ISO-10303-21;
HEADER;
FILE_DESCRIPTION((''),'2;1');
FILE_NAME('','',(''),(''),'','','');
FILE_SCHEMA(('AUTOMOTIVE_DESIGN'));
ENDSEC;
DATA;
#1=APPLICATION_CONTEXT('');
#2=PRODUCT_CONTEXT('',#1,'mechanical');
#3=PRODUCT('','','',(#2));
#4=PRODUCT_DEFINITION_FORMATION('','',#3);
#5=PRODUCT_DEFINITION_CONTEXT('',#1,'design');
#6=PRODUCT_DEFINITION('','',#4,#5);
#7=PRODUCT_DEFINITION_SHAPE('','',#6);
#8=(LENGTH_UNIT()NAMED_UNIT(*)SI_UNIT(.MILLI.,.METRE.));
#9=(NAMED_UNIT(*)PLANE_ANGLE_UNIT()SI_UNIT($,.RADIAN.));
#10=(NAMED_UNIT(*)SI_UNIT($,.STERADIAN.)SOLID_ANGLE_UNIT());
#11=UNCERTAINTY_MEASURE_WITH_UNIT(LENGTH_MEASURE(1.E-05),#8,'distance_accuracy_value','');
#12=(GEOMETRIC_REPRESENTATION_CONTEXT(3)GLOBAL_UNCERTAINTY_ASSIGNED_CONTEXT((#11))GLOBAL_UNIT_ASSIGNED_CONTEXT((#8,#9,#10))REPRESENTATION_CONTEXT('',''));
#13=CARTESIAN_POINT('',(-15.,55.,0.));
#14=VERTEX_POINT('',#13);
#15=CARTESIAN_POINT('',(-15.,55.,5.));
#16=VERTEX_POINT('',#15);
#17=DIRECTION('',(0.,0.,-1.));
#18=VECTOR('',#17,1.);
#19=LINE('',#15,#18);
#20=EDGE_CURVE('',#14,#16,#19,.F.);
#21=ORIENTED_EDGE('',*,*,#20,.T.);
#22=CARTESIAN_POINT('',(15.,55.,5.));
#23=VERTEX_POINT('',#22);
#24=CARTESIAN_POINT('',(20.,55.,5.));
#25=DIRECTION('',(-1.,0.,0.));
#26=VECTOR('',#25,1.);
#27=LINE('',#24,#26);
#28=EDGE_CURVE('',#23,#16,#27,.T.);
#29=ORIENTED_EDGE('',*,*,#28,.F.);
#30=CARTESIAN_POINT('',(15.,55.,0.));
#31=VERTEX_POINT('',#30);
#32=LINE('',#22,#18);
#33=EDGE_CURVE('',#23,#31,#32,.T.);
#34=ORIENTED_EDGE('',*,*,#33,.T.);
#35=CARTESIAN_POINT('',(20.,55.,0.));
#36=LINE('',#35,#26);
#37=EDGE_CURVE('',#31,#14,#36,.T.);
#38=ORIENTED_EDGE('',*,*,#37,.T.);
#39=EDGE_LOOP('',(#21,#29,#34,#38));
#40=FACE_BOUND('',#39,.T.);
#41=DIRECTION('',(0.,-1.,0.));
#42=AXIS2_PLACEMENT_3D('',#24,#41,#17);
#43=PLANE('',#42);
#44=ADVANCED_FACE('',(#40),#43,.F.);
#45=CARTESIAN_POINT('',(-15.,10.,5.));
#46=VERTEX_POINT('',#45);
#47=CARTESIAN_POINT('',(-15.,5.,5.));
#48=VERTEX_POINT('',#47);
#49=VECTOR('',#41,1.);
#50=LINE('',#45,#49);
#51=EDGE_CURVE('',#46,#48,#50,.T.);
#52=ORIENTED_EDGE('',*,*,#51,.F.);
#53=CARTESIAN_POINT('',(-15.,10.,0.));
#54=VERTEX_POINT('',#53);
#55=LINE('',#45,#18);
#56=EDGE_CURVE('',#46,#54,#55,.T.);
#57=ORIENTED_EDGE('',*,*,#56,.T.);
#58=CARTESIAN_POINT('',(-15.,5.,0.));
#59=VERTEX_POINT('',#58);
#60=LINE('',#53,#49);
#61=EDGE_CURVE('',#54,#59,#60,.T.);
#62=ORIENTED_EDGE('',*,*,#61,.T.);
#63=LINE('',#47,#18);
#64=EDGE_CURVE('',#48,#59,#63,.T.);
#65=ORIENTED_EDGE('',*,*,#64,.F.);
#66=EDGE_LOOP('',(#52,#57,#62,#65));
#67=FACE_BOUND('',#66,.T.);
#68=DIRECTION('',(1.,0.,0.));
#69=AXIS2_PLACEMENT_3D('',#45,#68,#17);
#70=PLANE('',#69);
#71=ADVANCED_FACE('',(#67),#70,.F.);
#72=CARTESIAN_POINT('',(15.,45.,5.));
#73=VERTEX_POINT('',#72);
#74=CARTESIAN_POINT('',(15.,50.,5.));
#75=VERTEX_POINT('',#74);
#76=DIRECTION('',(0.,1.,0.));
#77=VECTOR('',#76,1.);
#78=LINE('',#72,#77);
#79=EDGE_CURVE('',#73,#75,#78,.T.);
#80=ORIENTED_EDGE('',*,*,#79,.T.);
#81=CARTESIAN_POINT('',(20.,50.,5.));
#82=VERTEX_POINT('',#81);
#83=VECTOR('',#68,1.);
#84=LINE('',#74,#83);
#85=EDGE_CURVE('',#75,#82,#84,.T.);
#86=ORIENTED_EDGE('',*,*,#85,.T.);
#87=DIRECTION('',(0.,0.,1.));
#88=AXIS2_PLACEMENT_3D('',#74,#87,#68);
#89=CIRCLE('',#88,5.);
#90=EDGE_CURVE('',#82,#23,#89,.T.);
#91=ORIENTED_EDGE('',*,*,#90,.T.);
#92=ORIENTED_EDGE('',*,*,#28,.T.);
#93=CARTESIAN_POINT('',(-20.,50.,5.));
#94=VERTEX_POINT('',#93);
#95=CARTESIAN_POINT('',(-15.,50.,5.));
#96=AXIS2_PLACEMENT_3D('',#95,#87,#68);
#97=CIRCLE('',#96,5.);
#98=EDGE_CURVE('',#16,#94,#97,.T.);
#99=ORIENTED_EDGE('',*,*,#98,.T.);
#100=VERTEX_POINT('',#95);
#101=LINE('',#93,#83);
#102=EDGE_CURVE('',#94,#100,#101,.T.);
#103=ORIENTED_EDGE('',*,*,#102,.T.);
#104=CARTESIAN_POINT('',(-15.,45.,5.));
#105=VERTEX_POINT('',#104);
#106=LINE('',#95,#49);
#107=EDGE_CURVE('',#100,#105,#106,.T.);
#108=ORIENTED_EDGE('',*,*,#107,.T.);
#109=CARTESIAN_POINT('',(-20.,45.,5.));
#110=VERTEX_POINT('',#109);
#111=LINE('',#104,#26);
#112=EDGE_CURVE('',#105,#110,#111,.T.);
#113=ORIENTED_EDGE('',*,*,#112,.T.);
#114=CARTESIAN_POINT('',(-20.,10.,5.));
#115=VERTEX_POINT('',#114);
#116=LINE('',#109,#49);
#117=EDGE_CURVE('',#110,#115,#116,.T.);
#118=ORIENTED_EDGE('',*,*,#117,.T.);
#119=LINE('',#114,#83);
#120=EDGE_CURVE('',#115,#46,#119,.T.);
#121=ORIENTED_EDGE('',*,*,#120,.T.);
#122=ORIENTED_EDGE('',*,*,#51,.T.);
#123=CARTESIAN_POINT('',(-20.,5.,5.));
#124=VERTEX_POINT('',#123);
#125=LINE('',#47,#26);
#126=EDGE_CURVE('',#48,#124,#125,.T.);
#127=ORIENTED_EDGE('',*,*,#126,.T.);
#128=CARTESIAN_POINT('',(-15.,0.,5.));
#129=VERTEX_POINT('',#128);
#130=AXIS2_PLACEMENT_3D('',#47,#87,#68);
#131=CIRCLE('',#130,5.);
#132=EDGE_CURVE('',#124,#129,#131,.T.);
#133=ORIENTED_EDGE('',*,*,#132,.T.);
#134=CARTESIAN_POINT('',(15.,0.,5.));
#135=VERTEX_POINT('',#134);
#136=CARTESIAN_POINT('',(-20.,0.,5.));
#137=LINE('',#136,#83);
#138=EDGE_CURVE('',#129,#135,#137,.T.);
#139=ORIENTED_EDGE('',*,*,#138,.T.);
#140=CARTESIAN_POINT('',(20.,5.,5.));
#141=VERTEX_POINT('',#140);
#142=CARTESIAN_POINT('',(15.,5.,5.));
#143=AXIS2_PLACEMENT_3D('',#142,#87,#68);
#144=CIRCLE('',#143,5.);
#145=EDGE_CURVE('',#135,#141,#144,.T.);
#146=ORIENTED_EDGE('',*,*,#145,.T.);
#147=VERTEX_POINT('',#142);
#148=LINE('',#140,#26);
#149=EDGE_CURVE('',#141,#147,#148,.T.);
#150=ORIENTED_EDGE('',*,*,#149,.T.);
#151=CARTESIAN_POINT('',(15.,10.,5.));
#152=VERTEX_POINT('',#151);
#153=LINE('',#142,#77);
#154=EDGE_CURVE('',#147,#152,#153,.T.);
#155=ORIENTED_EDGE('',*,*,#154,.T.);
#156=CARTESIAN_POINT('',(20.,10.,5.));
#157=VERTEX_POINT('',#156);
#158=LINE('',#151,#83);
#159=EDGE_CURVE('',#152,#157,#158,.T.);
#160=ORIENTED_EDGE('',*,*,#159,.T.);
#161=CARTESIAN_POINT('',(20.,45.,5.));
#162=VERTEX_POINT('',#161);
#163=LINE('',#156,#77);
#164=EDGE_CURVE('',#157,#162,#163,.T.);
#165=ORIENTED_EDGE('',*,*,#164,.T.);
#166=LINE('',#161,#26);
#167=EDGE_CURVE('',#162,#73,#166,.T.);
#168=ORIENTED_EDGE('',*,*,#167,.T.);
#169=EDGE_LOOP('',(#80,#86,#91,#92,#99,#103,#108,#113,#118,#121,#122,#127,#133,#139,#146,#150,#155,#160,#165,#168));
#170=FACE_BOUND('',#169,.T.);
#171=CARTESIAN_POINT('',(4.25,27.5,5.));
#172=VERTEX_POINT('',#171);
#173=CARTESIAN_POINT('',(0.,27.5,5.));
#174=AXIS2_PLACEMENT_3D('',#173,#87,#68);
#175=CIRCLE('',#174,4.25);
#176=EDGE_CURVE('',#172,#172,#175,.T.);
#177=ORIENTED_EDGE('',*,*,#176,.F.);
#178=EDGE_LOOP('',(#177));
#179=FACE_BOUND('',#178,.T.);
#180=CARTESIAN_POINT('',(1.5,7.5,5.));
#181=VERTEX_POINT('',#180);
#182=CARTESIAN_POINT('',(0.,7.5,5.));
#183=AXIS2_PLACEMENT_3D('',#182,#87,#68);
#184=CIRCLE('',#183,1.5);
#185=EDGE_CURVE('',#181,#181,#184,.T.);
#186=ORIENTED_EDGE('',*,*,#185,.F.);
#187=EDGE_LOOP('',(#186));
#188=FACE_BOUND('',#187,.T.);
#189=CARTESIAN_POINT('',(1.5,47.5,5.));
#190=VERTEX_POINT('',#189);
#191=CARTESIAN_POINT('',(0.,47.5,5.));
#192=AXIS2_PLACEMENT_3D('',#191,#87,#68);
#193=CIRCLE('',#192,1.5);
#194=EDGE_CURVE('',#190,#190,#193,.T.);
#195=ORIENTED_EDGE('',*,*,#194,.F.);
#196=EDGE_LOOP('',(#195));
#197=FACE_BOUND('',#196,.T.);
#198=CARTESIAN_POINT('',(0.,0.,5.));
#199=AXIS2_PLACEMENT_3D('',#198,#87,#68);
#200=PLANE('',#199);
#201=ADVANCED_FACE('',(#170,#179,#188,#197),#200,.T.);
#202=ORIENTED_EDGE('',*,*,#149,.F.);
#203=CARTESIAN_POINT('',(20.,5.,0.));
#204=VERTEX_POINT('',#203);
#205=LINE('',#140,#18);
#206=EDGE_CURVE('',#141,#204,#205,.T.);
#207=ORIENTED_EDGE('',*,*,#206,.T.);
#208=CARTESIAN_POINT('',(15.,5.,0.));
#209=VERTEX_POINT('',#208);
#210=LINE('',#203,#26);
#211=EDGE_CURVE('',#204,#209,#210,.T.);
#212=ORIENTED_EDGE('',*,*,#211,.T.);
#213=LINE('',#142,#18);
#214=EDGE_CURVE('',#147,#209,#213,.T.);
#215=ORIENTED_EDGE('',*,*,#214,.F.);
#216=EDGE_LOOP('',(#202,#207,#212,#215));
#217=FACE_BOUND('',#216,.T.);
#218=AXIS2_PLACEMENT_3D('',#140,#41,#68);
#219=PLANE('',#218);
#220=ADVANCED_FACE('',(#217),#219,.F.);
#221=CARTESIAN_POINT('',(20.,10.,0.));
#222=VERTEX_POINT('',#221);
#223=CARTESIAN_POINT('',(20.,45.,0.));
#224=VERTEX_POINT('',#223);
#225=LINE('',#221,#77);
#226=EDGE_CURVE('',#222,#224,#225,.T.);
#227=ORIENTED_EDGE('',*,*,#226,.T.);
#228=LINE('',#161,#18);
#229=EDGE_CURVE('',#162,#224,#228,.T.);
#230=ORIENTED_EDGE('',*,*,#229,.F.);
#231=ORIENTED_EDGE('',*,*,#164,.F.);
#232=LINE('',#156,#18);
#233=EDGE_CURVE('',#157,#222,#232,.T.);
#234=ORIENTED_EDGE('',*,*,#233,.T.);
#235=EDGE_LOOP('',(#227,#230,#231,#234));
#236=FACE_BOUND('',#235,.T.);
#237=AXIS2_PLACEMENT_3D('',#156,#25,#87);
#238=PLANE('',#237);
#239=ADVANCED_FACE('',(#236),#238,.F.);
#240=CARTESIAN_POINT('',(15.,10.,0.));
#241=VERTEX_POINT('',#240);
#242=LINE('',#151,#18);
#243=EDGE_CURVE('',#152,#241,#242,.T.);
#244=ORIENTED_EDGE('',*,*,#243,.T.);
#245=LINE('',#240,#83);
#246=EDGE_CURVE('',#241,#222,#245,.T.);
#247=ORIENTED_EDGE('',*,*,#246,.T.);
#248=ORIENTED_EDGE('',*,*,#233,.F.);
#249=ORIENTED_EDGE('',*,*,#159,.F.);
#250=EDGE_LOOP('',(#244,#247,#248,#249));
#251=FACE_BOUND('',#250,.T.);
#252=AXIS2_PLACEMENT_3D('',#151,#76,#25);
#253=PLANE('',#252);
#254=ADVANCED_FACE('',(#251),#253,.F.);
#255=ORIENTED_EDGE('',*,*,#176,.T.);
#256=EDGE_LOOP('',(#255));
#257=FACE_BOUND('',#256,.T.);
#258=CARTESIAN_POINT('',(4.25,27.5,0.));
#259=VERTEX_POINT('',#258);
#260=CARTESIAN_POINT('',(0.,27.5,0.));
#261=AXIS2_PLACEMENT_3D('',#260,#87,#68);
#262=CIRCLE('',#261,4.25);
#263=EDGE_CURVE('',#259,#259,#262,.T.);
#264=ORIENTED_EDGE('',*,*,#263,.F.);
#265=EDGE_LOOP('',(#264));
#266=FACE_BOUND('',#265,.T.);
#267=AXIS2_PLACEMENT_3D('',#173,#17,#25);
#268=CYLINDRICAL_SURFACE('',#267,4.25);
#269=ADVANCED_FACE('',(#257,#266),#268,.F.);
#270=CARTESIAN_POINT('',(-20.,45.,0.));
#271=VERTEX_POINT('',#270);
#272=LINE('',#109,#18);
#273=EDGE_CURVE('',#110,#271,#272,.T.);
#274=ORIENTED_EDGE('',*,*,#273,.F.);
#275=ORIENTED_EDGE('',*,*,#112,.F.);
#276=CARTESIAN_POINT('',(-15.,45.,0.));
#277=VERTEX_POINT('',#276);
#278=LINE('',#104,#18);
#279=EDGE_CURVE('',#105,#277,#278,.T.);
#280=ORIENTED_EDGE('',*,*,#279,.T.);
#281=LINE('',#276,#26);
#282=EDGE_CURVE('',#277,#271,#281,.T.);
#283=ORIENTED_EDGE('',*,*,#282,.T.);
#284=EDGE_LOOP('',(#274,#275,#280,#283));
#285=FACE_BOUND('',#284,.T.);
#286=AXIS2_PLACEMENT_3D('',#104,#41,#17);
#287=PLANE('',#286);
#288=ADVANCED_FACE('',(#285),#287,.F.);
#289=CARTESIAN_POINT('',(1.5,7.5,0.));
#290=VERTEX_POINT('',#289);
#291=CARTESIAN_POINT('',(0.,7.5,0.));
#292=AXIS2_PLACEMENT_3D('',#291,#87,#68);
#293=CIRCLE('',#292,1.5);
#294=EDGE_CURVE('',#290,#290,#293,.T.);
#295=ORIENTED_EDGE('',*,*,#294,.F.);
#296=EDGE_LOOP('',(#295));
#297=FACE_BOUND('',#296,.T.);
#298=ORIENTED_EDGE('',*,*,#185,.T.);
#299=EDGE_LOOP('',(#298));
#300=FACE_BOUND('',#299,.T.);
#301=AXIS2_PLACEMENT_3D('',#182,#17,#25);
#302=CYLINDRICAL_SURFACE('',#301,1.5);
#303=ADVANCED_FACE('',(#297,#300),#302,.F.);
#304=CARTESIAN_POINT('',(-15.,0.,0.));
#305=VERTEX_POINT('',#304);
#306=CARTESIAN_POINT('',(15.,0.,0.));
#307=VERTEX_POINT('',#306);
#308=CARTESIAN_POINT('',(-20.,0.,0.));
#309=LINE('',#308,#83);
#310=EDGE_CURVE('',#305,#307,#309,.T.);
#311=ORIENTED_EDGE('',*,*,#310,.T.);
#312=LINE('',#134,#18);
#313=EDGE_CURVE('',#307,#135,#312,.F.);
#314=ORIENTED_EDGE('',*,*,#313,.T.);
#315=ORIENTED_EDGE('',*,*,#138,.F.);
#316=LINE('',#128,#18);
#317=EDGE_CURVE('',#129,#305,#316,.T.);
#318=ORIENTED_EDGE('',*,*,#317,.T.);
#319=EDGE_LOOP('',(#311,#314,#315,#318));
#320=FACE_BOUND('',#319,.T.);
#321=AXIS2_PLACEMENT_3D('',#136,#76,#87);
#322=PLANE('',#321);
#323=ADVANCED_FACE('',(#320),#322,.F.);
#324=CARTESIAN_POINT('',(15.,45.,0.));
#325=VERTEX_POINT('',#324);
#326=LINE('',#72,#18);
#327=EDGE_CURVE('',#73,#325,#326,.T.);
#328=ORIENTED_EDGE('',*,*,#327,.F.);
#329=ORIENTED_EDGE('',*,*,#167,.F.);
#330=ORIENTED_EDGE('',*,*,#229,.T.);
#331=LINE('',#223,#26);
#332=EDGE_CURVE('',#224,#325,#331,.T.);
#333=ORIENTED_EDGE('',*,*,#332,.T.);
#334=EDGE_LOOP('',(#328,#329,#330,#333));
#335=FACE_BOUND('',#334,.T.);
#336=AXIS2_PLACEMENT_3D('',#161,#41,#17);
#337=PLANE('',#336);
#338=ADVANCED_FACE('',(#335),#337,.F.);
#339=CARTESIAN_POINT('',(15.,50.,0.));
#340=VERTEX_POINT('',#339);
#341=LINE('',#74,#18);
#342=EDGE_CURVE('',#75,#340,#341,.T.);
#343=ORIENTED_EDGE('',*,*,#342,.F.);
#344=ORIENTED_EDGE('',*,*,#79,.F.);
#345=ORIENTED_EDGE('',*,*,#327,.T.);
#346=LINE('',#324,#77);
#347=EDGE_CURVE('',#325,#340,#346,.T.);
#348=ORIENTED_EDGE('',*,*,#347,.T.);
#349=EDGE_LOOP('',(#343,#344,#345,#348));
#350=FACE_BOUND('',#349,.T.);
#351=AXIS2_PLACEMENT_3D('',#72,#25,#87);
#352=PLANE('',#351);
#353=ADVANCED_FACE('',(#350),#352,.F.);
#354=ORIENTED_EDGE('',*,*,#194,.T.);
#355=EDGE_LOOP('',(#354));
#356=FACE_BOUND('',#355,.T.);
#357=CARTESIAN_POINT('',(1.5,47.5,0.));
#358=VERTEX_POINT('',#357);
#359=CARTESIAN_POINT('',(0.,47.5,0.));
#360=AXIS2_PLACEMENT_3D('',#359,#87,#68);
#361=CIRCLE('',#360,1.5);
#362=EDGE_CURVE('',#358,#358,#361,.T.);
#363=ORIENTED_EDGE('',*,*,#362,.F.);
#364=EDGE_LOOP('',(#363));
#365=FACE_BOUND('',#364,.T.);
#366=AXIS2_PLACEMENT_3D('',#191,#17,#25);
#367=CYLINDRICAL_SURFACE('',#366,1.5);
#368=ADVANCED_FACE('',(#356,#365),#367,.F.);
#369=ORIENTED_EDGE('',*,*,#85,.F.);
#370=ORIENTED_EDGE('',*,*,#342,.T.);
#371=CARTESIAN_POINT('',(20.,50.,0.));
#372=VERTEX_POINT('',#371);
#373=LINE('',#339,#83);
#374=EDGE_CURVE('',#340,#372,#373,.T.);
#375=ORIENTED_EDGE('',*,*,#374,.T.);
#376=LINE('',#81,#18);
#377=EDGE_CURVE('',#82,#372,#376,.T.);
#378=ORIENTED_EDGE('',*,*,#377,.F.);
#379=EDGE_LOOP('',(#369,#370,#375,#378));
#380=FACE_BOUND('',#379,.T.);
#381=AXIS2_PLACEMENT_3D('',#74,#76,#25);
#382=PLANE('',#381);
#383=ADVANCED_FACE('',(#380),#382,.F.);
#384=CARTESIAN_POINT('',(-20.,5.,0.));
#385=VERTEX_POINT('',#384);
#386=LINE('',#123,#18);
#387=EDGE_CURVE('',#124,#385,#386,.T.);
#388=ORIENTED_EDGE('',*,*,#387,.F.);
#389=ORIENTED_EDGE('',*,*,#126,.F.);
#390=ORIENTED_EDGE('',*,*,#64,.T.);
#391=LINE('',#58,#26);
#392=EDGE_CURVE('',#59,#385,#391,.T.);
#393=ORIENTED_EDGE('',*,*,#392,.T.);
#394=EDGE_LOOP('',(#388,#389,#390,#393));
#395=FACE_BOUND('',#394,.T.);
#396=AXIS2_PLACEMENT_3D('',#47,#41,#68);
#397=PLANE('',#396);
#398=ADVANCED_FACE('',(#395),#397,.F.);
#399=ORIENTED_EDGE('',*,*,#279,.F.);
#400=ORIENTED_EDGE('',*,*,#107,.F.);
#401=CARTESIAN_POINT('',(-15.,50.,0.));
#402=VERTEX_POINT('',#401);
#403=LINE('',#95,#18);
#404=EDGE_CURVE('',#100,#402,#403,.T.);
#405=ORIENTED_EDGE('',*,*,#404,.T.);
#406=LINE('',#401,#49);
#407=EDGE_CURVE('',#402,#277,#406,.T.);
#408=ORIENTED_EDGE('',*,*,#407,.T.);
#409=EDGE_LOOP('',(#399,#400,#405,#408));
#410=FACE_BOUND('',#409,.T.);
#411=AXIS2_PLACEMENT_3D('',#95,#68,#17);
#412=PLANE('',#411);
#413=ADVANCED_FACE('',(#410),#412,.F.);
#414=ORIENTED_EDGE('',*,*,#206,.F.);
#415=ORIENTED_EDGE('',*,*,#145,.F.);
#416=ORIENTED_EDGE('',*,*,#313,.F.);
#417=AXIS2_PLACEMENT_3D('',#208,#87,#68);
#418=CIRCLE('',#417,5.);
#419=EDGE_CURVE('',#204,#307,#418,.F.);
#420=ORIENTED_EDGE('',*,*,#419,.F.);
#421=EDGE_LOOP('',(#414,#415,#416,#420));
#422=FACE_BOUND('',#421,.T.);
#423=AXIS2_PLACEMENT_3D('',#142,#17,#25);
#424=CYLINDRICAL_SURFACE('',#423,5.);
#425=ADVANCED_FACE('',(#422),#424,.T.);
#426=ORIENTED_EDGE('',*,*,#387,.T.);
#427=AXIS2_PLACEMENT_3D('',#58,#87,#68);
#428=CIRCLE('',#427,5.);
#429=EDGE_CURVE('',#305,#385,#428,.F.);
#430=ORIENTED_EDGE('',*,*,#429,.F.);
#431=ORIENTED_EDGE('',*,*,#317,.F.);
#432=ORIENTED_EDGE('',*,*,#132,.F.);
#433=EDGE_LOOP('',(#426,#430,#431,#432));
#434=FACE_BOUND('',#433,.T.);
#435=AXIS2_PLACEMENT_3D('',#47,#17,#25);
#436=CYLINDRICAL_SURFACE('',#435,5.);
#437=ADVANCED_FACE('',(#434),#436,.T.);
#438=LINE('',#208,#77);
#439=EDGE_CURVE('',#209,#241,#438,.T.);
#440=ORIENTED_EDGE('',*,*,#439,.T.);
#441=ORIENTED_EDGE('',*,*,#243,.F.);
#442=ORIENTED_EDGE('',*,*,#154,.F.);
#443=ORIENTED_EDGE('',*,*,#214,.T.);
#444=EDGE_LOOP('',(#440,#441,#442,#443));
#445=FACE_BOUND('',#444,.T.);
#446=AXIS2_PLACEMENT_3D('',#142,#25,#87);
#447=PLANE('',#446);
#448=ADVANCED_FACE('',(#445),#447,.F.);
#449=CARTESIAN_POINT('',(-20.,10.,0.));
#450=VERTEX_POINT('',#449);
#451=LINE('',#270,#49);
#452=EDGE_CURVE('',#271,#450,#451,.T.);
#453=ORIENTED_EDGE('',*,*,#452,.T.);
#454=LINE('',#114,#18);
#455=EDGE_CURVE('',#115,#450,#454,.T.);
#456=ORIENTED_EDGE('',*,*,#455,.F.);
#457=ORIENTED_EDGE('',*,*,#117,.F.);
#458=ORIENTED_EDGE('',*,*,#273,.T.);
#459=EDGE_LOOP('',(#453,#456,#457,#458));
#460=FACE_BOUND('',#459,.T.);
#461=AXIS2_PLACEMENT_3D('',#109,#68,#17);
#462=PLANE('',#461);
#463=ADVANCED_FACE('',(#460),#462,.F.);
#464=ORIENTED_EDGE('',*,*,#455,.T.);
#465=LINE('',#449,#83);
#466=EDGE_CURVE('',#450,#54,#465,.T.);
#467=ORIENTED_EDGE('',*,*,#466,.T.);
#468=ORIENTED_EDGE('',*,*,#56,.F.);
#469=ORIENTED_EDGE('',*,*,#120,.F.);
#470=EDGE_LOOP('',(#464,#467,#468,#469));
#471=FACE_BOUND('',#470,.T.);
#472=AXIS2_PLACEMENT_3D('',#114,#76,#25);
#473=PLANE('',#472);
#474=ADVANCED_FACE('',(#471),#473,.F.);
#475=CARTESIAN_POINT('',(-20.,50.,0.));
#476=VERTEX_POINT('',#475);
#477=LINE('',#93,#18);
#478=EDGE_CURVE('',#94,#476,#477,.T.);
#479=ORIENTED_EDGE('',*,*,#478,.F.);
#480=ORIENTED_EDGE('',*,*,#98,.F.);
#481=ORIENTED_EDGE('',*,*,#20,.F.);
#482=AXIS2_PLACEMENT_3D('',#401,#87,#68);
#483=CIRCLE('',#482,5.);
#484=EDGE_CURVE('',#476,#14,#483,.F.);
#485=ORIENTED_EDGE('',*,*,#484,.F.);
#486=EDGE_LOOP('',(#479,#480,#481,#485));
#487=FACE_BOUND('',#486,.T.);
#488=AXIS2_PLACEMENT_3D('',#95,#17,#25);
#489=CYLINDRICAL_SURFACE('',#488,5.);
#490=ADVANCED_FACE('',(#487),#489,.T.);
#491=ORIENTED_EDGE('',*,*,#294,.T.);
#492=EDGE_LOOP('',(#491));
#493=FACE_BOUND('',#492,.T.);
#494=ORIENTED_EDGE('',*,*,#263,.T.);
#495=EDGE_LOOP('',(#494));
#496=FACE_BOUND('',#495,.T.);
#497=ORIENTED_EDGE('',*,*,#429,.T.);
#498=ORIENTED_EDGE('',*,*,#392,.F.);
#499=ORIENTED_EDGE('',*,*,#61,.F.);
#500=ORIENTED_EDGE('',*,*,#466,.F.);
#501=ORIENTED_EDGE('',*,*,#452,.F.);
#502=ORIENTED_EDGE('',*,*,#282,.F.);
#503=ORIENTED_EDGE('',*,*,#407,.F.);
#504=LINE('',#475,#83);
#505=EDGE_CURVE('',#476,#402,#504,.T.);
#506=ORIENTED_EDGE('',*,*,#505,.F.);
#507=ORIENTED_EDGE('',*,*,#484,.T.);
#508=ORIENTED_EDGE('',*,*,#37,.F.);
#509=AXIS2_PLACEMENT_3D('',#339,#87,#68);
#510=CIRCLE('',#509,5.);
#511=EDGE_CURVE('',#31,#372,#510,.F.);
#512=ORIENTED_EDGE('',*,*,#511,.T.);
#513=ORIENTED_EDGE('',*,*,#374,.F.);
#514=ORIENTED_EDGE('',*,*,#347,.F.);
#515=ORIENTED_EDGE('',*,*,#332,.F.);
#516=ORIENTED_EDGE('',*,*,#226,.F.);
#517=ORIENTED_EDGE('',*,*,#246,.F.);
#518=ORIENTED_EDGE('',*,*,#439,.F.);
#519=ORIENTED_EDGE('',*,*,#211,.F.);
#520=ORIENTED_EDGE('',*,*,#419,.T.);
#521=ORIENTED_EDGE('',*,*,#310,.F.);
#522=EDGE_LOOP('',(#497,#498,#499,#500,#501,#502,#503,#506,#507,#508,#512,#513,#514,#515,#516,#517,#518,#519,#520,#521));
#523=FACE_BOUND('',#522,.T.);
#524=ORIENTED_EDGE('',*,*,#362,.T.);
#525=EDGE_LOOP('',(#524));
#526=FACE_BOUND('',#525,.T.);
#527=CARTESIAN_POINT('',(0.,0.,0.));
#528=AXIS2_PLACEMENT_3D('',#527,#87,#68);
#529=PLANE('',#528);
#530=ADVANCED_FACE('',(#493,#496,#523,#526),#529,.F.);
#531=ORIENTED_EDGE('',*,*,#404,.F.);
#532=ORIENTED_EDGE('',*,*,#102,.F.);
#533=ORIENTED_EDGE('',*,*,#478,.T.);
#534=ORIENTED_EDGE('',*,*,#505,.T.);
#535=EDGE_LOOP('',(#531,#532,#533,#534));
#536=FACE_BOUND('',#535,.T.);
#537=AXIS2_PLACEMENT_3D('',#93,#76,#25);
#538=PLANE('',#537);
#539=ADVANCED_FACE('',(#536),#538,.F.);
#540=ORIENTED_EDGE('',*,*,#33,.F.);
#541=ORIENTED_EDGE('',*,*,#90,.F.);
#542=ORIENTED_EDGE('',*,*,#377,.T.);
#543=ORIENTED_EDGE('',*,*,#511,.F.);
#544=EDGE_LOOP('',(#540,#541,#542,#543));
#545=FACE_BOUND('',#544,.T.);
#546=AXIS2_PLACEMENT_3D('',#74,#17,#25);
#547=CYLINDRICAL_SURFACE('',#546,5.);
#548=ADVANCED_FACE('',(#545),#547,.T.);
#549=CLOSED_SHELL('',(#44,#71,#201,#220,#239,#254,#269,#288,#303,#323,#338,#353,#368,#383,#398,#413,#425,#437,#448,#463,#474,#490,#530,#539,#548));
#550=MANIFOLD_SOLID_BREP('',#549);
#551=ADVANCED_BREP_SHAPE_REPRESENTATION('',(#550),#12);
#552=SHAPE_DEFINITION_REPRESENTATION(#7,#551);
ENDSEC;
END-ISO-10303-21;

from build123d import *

# Parameters (mm, degrees)
ESQUISSE1_R        = 1.5
ESQUISSE1_R_2      = 4.25
BOSS_EXTRU_1_DEPTH = 5
CONG_1_R           = 5


with BuildPart() as part:
    # Esquisse1 → Boss.-Extru.1 (new body)
    with BuildSketch(Plane.XY):
        Polygon((-20, 0), (20, 0), (20, 5), (15, 5), (15, 10), (20, 10), (20, 45), (15, 45), (15, 50), (20, 50), (20, 55), (-20, 55), (-20, 50), (-15, 50), (-15, 45), (-20, 45), (-20, 10), (-15, 10), (-15, 5), (-20, 5), align=None)
        with Locations((0, 47.5)):
            Circle(ESQUISSE1_R, mode=Mode.SUBTRACT)
        with Locations((0, 7.5)):
            Circle(ESQUISSE1_R, mode=Mode.SUBTRACT)
        with Locations((0, 27.5)):
            Circle(ESQUISSE1_R_2, mode=Mode.SUBTRACT)
    extrude(amount=BOSS_EXTRU_1_DEPTH)

    # Congé1
    cong_1_edges = [part.edges().sort_by_distance(p)[0] for p in [
        (20, 55, 2.5),
        (20, 0, 2.5),
        (-20, 0, 2.5),
        (-20, 55, 2.5),
    ]]
    fillet(cong_1_edges, radius=CONG_1_R - 0.0001)  # a hair under: the kernel refuses the full size


solid = part.part
